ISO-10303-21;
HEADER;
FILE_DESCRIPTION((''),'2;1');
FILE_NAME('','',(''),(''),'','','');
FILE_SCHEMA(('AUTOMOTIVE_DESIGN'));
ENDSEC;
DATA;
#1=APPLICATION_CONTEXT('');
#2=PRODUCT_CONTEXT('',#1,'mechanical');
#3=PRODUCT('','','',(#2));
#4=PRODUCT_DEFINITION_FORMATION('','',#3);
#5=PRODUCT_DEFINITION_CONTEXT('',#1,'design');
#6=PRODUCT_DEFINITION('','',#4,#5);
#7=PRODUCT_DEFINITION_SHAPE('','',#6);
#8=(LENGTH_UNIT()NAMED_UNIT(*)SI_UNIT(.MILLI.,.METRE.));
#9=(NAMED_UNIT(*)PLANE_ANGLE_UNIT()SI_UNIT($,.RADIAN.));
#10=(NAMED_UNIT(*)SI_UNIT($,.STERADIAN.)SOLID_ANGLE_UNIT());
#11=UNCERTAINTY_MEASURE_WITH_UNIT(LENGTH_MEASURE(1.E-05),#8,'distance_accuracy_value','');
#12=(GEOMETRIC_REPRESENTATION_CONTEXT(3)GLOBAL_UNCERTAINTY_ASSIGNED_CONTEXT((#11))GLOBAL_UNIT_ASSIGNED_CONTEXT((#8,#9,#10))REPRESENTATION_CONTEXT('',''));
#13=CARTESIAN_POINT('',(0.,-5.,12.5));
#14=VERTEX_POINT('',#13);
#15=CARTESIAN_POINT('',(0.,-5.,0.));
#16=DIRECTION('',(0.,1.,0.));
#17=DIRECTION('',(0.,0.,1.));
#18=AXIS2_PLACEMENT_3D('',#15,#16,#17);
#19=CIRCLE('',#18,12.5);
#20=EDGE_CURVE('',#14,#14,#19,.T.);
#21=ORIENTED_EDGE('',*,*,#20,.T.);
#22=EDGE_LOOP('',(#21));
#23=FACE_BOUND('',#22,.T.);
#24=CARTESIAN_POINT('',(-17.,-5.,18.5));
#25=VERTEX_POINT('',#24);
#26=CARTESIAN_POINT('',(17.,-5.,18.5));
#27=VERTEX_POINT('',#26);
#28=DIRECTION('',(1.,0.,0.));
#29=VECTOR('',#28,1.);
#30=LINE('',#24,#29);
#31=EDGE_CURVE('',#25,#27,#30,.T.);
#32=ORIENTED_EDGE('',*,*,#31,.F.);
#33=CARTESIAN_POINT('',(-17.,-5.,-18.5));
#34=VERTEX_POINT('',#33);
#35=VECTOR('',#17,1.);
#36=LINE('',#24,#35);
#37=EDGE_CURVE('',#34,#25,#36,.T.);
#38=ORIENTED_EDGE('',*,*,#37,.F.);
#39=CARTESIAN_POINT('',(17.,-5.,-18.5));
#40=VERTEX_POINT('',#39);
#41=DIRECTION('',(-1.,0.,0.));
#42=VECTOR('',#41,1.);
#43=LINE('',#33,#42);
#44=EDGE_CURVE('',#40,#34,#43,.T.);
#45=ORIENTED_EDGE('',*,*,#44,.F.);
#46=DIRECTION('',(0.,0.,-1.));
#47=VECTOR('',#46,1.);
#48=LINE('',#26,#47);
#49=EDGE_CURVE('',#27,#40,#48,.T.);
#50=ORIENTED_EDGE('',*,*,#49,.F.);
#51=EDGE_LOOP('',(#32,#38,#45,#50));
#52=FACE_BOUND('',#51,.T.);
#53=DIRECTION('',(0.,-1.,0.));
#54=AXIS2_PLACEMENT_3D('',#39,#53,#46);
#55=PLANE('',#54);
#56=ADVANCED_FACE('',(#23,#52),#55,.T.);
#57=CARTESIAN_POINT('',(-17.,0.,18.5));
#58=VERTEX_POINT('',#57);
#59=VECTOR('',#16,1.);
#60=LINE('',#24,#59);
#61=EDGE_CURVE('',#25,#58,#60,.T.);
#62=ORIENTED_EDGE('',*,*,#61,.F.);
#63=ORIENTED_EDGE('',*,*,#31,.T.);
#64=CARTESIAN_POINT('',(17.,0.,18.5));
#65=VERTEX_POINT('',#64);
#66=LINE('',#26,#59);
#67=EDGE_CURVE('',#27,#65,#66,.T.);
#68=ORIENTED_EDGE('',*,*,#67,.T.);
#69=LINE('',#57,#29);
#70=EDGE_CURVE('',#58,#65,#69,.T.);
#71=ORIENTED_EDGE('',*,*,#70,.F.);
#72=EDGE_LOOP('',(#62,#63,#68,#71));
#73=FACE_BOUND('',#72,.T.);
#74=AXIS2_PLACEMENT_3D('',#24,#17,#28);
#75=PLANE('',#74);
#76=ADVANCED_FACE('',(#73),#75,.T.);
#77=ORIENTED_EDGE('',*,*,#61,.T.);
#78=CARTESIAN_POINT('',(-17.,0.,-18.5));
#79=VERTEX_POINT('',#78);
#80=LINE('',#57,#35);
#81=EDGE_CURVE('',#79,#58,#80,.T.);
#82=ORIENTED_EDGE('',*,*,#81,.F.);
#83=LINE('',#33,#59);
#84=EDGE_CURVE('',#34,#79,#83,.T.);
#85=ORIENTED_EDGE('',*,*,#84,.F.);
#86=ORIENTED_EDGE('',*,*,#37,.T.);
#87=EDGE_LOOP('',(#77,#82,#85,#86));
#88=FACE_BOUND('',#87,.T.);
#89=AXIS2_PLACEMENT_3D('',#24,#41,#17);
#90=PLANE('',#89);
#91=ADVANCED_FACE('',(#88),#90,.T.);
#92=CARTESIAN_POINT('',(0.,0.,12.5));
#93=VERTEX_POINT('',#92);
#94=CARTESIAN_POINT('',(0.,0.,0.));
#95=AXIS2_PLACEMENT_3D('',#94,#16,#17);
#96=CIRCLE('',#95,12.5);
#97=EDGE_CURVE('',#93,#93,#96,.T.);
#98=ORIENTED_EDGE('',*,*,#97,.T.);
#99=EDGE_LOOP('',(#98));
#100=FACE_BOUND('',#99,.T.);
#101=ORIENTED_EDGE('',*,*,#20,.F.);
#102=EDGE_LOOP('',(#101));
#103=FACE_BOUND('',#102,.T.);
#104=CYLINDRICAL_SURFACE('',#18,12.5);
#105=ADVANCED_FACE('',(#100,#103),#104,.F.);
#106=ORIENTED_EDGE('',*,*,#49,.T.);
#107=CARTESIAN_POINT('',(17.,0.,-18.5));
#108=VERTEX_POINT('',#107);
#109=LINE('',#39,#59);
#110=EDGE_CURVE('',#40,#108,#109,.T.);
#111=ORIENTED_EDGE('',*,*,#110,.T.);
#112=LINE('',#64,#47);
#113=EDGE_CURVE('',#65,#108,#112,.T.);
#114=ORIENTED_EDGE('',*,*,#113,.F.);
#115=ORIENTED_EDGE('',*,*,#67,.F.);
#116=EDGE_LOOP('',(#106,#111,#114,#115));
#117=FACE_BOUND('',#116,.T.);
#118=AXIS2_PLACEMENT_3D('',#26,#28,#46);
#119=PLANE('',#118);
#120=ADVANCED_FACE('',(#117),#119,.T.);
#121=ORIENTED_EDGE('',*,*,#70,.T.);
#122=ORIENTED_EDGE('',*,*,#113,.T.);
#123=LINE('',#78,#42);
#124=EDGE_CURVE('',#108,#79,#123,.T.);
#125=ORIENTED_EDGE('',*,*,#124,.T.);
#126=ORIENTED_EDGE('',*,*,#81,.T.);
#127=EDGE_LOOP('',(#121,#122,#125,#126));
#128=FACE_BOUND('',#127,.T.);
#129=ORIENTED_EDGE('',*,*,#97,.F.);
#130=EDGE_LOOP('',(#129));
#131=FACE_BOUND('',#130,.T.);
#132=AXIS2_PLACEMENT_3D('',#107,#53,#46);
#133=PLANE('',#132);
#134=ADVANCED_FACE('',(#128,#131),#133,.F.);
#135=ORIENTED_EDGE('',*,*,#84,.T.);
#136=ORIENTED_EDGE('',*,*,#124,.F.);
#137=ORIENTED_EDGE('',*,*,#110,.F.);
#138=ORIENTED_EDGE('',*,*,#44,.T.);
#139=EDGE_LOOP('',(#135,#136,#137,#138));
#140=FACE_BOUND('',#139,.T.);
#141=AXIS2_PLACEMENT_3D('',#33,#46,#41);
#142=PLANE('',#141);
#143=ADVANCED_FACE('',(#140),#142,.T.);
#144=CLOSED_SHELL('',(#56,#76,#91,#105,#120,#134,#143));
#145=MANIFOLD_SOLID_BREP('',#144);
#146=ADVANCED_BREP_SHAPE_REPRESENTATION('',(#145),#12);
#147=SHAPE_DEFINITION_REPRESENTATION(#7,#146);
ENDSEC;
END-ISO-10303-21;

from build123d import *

# Parameters (mm, degrees)
CROQUIS1_W            = 34
CROQUIS1_H            = 37
BRIDA_BASE1_DEPTH     = 5
CROQUIS5_R            = 12.5
CORTAR_EXTRUIR1_DEPTH = 26.617376915


# Sheet-metal steps are written as plain solids
with BuildPart() as part:
    # Croquis1 → Brida base1 (new body)
    with BuildSketch(Plane(origin=(0, 0, 0), x_dir=(1, 0, 0), z_dir=(0, 1, 0))):
        Rectangle(CROQUIS1_W, CROQUIS1_H)
    extrude(amount=-BRIDA_BASE1_DEPTH)

    # Croquis5 → Cortar-Extruir1 (cut, through all)
    with BuildSketch(Plane(origin=(0, 0, 0), x_dir=(1, 0, 0), z_dir=(0, 1, 0))):
        with Locations(Location((0, 0, 0), (0, 0, 270))):
            Circle(CROQUIS5_R)
    extrude(amount=-CORTAR_EXTRUIR1_DEPTH, mode=Mode.SUBTRACT)


solid = part.part
